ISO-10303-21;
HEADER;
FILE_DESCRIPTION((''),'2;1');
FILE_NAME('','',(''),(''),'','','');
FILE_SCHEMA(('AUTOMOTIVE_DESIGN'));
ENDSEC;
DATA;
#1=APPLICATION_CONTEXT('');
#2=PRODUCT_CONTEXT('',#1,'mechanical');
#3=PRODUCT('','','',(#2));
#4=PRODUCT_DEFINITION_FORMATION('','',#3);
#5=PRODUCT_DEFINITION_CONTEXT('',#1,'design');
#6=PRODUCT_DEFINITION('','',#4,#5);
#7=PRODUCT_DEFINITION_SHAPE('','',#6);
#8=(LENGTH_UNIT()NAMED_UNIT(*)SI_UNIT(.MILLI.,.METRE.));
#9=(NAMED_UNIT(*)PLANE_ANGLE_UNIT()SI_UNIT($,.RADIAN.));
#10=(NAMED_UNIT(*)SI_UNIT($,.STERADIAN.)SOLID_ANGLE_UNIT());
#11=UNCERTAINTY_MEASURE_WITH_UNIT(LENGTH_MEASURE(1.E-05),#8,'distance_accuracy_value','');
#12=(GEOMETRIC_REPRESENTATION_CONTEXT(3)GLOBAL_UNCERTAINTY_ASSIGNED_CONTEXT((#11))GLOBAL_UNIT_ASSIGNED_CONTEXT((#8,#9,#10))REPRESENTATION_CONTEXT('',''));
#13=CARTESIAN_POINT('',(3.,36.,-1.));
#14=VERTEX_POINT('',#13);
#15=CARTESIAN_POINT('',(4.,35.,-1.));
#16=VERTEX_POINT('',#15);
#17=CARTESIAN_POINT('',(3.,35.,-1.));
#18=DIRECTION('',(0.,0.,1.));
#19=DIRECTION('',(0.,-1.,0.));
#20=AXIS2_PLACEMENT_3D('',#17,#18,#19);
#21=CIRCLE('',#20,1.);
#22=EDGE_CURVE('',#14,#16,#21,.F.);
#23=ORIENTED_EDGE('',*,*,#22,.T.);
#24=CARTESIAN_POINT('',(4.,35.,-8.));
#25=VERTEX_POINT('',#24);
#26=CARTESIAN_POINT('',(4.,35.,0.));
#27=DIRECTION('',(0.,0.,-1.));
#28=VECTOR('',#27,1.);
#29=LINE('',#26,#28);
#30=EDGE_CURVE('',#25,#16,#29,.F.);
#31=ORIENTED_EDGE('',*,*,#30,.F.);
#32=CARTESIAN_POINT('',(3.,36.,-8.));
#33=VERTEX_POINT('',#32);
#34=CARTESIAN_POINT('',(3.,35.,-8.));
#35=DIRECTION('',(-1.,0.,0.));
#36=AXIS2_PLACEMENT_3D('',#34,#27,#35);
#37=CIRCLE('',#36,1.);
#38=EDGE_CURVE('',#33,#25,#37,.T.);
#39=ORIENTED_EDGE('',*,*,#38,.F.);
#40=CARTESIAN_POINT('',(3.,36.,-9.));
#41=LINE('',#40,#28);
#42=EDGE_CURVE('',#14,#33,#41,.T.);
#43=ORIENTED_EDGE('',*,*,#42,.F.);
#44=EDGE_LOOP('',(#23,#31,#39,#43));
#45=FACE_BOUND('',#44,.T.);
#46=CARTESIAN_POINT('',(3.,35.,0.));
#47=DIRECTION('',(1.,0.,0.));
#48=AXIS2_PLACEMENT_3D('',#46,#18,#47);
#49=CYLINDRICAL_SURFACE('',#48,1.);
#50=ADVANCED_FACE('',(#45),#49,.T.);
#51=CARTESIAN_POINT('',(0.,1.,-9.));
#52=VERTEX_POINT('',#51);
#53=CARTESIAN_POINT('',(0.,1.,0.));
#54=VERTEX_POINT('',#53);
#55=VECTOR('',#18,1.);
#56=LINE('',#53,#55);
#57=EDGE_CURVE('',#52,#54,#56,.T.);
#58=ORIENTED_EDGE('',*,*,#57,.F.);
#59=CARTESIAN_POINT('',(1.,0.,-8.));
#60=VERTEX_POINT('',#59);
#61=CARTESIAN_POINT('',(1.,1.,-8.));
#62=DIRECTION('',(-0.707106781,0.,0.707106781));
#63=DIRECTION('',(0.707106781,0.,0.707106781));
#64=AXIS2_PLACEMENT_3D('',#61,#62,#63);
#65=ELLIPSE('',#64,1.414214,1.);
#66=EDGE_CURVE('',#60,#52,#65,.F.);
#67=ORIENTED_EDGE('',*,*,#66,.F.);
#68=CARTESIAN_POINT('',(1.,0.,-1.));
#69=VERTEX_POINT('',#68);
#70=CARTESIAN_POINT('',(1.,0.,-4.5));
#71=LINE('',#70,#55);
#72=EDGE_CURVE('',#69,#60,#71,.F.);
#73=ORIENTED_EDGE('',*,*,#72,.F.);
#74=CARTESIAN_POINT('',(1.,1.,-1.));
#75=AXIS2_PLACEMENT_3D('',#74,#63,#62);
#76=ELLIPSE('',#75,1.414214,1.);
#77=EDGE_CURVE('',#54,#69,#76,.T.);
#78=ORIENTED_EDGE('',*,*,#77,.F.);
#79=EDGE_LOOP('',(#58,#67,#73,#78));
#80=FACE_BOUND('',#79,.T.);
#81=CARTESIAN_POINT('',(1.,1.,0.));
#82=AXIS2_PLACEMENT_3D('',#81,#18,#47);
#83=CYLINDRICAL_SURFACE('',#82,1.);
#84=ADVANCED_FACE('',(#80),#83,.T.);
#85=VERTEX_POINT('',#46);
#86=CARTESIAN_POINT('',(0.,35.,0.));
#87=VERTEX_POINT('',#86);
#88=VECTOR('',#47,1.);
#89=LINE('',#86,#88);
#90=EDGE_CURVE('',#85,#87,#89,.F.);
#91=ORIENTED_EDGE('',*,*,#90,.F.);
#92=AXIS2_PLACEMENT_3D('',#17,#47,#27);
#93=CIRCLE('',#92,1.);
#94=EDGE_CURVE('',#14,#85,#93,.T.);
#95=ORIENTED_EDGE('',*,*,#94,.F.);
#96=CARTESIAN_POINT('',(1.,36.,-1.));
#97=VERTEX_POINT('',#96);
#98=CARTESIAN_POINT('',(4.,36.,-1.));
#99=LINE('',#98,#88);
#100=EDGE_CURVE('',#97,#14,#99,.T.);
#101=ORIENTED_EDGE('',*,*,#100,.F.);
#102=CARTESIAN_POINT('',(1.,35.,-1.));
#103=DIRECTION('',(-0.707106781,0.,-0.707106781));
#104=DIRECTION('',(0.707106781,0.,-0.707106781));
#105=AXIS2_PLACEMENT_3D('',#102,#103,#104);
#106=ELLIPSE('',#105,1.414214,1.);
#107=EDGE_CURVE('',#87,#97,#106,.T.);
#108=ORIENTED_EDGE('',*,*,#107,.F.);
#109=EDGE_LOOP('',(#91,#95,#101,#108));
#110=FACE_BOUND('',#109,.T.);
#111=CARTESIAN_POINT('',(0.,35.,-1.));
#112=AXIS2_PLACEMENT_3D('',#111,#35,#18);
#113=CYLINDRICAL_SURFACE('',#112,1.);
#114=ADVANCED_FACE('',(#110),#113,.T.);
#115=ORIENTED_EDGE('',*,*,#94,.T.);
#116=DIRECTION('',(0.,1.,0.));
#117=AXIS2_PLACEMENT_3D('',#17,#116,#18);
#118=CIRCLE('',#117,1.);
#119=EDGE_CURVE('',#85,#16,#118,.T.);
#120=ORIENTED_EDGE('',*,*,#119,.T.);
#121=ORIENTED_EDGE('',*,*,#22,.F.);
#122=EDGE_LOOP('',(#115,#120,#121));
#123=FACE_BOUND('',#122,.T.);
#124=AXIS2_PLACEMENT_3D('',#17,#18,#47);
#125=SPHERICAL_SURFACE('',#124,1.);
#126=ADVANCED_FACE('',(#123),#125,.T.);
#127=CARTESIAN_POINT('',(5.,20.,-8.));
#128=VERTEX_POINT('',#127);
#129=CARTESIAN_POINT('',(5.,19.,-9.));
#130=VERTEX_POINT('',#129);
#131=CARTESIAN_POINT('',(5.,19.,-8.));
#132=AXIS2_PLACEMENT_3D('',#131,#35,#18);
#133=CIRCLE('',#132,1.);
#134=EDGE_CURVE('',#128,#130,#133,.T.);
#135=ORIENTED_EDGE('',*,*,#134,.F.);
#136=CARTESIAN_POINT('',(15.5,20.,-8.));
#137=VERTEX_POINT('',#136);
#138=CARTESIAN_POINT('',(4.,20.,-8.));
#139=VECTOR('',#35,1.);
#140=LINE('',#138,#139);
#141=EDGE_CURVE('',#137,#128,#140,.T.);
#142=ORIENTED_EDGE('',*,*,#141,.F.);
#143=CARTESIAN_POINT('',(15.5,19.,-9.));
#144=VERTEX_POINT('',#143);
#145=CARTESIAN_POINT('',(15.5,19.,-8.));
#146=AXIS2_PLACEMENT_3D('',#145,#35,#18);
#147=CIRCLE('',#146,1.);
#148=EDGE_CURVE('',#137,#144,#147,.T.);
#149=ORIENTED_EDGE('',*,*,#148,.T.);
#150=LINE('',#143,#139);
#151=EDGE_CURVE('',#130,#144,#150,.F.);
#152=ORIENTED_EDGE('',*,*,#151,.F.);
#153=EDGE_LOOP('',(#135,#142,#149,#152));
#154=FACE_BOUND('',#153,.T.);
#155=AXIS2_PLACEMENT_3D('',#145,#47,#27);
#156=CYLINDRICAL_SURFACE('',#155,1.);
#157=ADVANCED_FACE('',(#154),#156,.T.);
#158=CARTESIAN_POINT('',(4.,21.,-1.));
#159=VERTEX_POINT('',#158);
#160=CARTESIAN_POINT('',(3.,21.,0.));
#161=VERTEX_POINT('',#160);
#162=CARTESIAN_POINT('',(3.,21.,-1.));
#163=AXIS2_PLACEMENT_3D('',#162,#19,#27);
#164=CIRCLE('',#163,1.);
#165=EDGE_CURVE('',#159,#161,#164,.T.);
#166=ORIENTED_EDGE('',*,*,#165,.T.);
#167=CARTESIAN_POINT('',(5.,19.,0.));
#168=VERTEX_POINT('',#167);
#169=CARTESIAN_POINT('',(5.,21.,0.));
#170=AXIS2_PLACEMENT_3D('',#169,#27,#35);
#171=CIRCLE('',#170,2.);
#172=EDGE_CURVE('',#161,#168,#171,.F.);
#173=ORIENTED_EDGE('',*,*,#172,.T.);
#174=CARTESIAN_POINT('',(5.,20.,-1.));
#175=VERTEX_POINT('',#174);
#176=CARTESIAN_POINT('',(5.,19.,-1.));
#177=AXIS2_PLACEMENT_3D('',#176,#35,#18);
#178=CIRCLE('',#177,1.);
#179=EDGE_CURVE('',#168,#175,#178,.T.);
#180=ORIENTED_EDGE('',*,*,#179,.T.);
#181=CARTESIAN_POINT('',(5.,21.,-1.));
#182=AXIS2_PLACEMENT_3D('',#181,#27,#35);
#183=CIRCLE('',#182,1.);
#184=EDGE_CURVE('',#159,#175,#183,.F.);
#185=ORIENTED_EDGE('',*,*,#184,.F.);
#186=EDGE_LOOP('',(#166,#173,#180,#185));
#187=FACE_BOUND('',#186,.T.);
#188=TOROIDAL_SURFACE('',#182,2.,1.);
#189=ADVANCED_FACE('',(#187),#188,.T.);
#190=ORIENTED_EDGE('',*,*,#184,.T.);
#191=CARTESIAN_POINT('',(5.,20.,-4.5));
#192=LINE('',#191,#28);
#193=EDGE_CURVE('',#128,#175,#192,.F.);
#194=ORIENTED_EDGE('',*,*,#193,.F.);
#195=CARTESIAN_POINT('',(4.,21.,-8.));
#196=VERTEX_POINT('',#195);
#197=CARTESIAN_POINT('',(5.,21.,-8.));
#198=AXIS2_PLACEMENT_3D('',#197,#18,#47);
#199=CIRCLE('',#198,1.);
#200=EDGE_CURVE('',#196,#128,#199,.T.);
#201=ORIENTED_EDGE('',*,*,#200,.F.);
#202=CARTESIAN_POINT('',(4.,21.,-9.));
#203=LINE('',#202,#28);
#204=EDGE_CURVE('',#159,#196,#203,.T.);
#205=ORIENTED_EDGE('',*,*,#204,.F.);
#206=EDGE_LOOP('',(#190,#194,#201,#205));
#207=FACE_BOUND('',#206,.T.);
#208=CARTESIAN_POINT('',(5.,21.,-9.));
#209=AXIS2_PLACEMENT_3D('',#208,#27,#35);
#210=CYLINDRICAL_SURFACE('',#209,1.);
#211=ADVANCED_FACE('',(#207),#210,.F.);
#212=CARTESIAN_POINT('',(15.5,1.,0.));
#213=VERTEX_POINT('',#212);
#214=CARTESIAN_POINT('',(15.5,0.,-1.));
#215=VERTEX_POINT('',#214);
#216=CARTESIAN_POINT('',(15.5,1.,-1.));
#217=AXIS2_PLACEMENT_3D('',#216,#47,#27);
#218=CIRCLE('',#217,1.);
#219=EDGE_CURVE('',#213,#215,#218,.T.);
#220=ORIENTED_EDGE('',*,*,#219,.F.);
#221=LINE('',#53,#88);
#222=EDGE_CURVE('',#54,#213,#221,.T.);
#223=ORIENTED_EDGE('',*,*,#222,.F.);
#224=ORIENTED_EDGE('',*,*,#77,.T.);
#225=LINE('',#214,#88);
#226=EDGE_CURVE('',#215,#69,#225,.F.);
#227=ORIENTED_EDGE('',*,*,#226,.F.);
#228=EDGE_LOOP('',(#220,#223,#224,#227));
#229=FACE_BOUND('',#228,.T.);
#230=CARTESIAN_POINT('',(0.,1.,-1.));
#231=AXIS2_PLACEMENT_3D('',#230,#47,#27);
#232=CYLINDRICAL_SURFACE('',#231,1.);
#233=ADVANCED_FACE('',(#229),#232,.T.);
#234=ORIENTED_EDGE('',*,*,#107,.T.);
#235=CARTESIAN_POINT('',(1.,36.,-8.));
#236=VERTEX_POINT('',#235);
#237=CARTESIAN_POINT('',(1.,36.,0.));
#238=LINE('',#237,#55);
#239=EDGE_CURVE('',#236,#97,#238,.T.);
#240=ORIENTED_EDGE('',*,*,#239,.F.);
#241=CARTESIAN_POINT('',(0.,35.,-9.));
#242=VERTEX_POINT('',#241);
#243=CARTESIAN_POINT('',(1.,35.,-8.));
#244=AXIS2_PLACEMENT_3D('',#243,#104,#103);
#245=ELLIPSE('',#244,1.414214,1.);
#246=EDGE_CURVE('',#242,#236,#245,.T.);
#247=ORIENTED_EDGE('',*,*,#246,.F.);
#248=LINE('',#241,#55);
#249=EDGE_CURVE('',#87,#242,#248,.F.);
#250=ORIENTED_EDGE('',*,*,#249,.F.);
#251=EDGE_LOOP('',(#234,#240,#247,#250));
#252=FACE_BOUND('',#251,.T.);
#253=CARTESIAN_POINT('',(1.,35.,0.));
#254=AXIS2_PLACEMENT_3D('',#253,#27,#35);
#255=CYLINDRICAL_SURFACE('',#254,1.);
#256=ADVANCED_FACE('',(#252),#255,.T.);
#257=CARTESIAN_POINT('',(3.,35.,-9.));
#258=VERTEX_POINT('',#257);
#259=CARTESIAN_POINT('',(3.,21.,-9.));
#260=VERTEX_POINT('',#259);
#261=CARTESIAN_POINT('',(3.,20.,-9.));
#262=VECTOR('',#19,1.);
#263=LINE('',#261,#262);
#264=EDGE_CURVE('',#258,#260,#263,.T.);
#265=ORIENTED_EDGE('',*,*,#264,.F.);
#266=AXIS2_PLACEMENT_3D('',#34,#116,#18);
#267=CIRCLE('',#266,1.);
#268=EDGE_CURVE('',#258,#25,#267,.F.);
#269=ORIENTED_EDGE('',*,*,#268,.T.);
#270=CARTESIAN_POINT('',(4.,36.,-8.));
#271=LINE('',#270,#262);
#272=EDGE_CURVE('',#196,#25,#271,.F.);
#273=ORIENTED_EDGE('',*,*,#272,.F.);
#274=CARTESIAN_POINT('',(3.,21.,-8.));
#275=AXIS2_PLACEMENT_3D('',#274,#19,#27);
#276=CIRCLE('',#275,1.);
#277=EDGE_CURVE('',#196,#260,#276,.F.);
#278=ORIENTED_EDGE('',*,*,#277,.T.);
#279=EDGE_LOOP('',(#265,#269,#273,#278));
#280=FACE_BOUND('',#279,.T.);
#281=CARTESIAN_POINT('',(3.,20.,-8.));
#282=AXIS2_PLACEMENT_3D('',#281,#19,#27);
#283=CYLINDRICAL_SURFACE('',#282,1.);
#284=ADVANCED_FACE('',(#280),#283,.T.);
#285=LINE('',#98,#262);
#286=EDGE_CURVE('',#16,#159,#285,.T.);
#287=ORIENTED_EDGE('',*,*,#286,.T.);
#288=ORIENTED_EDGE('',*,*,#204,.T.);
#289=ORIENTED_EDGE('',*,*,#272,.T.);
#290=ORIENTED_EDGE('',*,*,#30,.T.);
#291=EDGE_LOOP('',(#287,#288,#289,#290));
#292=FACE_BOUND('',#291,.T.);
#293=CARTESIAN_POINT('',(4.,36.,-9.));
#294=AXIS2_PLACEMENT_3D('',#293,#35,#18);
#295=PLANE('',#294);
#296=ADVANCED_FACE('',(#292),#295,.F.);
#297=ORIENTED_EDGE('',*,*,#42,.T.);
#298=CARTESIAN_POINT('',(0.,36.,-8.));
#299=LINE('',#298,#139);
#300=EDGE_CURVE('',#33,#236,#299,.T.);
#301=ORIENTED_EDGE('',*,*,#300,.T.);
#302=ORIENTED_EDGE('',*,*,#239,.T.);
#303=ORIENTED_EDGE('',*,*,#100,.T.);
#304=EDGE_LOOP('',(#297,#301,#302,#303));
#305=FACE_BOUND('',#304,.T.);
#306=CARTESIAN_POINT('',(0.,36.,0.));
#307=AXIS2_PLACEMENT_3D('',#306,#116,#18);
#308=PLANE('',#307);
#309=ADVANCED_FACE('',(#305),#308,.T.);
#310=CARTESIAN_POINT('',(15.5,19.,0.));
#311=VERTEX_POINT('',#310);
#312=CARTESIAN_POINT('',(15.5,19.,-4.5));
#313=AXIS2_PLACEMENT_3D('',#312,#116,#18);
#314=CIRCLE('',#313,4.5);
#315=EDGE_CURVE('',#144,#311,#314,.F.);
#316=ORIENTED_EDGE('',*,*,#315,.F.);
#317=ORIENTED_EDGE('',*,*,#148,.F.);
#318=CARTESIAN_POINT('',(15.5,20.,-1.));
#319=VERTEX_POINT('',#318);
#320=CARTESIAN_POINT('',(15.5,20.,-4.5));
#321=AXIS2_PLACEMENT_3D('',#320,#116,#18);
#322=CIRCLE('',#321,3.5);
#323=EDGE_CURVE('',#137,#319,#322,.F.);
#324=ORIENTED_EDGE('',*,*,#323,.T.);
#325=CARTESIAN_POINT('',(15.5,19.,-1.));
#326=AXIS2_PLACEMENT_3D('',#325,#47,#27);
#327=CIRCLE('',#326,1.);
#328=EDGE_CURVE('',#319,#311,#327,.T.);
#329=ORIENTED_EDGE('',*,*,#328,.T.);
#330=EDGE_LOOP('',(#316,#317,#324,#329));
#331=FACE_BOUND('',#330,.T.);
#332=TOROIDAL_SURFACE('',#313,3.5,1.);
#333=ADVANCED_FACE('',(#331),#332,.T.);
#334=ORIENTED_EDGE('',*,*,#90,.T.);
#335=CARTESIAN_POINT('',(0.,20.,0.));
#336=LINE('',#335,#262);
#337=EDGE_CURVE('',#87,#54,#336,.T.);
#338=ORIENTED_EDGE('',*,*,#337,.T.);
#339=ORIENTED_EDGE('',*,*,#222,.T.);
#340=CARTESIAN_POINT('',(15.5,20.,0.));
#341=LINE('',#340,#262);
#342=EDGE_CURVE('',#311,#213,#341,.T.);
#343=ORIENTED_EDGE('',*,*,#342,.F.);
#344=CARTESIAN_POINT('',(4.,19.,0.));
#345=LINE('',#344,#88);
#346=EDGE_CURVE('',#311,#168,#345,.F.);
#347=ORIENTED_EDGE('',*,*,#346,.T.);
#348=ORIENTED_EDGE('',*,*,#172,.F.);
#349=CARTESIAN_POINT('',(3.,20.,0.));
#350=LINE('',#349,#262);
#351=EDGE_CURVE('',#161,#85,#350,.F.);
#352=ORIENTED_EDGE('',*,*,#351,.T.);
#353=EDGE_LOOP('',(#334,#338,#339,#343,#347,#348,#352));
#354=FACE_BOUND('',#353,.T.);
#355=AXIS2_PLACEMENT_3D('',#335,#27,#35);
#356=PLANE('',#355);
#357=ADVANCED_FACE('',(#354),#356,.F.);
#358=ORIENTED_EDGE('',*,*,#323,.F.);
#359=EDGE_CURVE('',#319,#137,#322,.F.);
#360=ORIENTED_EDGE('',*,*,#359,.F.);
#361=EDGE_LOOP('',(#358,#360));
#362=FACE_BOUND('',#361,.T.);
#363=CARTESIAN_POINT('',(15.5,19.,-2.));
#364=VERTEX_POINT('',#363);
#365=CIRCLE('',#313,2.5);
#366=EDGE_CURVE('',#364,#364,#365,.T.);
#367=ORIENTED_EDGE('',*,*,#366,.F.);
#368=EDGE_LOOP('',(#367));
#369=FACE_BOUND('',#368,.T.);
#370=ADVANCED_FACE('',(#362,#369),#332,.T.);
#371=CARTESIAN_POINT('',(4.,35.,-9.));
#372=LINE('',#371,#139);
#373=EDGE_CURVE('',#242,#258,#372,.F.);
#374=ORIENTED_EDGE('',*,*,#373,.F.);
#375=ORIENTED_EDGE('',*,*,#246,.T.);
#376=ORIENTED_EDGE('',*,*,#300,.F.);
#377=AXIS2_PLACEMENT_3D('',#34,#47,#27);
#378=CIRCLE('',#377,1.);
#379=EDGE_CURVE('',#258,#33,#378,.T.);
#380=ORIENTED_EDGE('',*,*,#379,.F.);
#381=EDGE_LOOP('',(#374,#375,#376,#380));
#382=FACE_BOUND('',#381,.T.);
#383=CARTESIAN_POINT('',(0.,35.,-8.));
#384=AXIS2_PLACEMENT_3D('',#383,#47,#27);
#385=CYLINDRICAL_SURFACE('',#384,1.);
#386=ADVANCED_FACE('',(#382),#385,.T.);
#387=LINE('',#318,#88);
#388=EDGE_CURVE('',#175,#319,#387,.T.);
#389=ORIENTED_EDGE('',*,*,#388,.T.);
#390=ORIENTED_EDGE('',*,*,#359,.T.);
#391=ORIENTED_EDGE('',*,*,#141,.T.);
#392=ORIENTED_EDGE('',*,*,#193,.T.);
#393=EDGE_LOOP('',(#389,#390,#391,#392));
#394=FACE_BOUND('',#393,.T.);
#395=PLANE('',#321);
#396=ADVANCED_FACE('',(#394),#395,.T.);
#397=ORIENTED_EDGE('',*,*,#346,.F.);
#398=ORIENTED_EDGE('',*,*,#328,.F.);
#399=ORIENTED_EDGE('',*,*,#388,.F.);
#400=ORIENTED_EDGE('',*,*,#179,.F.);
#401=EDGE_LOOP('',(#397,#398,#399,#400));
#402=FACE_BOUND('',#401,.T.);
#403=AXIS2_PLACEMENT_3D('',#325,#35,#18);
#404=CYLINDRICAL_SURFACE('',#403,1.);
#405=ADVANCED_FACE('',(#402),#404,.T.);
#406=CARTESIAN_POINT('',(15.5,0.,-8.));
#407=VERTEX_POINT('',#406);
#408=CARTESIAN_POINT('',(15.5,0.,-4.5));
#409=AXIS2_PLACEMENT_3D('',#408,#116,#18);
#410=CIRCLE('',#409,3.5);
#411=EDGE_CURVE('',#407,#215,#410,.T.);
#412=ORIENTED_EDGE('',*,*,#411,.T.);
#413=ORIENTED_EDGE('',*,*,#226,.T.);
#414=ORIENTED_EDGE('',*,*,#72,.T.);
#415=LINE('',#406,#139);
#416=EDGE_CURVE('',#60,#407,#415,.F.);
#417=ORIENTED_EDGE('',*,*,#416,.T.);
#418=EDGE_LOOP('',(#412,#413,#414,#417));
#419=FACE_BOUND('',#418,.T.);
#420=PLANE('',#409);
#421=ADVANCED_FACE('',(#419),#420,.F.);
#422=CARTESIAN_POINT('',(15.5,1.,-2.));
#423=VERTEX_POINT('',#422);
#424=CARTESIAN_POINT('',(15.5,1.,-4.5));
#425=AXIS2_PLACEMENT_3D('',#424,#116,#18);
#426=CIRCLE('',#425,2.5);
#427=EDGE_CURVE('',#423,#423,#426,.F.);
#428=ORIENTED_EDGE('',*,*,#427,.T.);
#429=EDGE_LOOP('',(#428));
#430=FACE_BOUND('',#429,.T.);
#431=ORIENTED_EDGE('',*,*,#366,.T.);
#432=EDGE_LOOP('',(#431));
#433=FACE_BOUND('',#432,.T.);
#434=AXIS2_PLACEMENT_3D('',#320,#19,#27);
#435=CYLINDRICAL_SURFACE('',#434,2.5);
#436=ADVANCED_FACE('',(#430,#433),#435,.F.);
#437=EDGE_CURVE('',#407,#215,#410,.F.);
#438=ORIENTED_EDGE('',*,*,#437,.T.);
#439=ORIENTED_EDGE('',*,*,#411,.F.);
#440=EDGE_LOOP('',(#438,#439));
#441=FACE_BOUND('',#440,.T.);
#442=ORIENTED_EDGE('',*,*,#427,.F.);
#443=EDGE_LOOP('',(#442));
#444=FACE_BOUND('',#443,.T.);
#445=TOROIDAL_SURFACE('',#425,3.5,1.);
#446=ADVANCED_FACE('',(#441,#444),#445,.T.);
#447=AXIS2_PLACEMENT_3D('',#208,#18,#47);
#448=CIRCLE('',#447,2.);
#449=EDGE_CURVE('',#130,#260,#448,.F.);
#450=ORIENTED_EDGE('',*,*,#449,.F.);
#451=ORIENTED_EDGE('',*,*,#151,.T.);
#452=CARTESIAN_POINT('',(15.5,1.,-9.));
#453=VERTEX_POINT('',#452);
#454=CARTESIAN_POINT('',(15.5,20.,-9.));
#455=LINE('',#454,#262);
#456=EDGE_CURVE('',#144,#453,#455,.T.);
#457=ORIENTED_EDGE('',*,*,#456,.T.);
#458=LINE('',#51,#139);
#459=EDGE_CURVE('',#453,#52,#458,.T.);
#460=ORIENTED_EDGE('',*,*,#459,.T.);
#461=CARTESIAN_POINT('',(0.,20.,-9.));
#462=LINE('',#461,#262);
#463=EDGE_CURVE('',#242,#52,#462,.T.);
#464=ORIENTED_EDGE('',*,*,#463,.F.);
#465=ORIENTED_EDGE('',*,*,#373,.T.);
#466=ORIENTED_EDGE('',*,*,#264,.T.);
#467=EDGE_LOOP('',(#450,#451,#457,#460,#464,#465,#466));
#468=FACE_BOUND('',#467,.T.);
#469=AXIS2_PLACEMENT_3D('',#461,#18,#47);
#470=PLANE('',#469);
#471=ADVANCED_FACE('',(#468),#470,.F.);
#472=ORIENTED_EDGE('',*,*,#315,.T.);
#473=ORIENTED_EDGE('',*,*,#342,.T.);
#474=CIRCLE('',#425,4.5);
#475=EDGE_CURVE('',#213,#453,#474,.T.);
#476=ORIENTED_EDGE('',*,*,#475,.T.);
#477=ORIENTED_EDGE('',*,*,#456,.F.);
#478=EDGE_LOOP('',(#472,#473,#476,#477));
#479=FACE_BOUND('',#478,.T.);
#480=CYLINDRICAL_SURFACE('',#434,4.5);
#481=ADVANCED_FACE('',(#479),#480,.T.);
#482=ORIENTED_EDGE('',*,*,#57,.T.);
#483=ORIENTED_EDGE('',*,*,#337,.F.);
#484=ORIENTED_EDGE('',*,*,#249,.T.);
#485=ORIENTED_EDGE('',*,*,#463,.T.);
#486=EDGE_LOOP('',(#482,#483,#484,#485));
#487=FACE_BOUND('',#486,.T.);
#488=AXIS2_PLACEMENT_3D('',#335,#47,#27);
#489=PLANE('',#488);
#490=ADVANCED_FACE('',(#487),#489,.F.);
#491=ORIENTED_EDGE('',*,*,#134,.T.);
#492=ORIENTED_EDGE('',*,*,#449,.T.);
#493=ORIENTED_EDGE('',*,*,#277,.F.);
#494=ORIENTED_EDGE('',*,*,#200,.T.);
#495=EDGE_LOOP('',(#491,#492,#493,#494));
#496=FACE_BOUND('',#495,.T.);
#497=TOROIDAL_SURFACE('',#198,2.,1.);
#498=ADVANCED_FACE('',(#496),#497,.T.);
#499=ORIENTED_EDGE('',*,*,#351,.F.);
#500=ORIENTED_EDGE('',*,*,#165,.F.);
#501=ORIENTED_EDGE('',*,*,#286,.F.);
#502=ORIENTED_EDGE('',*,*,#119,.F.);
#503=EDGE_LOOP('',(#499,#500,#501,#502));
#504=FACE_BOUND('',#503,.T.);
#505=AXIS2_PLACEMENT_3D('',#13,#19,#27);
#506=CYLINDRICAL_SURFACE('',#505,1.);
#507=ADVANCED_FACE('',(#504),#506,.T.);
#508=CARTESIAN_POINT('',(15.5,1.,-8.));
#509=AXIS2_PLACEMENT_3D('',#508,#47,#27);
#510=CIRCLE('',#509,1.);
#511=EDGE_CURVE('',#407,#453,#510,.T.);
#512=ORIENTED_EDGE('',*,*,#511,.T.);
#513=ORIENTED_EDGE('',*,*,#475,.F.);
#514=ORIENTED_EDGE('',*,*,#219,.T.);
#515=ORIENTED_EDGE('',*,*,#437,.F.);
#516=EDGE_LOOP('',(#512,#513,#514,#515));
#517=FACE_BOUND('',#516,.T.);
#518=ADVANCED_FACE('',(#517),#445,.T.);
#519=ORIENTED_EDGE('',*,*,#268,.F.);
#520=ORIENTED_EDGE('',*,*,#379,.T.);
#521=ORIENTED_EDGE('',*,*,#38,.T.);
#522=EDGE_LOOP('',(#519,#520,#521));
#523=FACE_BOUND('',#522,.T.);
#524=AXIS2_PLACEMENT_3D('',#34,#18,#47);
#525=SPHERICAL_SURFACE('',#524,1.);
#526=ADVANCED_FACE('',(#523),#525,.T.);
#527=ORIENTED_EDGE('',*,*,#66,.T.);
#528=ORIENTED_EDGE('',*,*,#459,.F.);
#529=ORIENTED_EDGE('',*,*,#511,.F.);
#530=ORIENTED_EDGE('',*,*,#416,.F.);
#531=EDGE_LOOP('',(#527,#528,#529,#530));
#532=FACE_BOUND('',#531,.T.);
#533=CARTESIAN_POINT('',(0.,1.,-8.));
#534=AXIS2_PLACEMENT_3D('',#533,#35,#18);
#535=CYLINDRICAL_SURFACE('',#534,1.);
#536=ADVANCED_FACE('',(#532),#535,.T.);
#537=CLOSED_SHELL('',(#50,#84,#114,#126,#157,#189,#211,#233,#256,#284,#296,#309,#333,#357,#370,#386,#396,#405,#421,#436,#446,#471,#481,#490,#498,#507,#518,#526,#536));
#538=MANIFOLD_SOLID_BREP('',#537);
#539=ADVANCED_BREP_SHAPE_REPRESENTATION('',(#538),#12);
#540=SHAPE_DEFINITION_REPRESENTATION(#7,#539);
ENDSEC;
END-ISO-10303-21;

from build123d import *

# Parameters (mm, degrees)
SKETCH1_R           = 2.5
BOSS_EXTRUDE1_DEPTH = 20
SKETCH2_W           = 4
SKETCH2_H           = 9
BOSS_EXTRUDE2_DEPTH = 16
FILLET1_R           = 1


with BuildPart() as part:
    # Sketch1 → Boss-Extrude1 (new body)
    with BuildSketch(Plane(origin=(0, 0, 0), x_dir=(1, 0, 0), z_dir=(0, 1, 0))):
        with BuildLine():
            Line((0, 0), (15.5, 0))
            ThreePointArc((15.5, 0), (20, 4.5), (15.5, 9))
            Line((15.5, 9), (0, 9))
            Line((0, 9), (0, 0))
        make_face()
        with Locations(Location((15.5, 4.5, 0), (0, 0, 270))):
            Circle(SKETCH1_R, mode=Mode.SUBTRACT)
    extrude(amount=BOSS_EXTRUDE1_DEPTH)

    # Sketch2 → Boss-Extrude2 (add)
    with BuildSketch(Plane(origin=(0, 20, 0), x_dir=(1, 0, 0), z_dir=(0, 1, 0))):
        with Locations((2, 4.5)):
            Rectangle(SKETCH2_W, SKETCH2_H)
    extrude(amount=BOSS_EXTRUDE2_DEPTH)

    # Fillet1
    fillet1_edges = [part.edges().sort_by_distance(p)[0] for p in [
        (15.5, 0, -7),
        (15.5, 20, -7),
        (20, 20, -4.5),
        (9.75, 20, -9),
        (9.75, 20, 0),
        (4, 20, -4.5),
        (4, 28, 0),
        (4, 28, -9),
        (0, 36, -4.5),
        (2, 36, 0),
        (4, 36, -4.5),
        (2, 36, -9),
        (7.75, 0, -9),
        (20, 0, -4.5),
        (7.75, 0, 0),
        (0, 0, -4.5),
    ]]
    fillet(fillet1_edges, radius=FILLET1_R - 0.0001)  # a hair under: the kernel refuses the full size


solid = part.part
